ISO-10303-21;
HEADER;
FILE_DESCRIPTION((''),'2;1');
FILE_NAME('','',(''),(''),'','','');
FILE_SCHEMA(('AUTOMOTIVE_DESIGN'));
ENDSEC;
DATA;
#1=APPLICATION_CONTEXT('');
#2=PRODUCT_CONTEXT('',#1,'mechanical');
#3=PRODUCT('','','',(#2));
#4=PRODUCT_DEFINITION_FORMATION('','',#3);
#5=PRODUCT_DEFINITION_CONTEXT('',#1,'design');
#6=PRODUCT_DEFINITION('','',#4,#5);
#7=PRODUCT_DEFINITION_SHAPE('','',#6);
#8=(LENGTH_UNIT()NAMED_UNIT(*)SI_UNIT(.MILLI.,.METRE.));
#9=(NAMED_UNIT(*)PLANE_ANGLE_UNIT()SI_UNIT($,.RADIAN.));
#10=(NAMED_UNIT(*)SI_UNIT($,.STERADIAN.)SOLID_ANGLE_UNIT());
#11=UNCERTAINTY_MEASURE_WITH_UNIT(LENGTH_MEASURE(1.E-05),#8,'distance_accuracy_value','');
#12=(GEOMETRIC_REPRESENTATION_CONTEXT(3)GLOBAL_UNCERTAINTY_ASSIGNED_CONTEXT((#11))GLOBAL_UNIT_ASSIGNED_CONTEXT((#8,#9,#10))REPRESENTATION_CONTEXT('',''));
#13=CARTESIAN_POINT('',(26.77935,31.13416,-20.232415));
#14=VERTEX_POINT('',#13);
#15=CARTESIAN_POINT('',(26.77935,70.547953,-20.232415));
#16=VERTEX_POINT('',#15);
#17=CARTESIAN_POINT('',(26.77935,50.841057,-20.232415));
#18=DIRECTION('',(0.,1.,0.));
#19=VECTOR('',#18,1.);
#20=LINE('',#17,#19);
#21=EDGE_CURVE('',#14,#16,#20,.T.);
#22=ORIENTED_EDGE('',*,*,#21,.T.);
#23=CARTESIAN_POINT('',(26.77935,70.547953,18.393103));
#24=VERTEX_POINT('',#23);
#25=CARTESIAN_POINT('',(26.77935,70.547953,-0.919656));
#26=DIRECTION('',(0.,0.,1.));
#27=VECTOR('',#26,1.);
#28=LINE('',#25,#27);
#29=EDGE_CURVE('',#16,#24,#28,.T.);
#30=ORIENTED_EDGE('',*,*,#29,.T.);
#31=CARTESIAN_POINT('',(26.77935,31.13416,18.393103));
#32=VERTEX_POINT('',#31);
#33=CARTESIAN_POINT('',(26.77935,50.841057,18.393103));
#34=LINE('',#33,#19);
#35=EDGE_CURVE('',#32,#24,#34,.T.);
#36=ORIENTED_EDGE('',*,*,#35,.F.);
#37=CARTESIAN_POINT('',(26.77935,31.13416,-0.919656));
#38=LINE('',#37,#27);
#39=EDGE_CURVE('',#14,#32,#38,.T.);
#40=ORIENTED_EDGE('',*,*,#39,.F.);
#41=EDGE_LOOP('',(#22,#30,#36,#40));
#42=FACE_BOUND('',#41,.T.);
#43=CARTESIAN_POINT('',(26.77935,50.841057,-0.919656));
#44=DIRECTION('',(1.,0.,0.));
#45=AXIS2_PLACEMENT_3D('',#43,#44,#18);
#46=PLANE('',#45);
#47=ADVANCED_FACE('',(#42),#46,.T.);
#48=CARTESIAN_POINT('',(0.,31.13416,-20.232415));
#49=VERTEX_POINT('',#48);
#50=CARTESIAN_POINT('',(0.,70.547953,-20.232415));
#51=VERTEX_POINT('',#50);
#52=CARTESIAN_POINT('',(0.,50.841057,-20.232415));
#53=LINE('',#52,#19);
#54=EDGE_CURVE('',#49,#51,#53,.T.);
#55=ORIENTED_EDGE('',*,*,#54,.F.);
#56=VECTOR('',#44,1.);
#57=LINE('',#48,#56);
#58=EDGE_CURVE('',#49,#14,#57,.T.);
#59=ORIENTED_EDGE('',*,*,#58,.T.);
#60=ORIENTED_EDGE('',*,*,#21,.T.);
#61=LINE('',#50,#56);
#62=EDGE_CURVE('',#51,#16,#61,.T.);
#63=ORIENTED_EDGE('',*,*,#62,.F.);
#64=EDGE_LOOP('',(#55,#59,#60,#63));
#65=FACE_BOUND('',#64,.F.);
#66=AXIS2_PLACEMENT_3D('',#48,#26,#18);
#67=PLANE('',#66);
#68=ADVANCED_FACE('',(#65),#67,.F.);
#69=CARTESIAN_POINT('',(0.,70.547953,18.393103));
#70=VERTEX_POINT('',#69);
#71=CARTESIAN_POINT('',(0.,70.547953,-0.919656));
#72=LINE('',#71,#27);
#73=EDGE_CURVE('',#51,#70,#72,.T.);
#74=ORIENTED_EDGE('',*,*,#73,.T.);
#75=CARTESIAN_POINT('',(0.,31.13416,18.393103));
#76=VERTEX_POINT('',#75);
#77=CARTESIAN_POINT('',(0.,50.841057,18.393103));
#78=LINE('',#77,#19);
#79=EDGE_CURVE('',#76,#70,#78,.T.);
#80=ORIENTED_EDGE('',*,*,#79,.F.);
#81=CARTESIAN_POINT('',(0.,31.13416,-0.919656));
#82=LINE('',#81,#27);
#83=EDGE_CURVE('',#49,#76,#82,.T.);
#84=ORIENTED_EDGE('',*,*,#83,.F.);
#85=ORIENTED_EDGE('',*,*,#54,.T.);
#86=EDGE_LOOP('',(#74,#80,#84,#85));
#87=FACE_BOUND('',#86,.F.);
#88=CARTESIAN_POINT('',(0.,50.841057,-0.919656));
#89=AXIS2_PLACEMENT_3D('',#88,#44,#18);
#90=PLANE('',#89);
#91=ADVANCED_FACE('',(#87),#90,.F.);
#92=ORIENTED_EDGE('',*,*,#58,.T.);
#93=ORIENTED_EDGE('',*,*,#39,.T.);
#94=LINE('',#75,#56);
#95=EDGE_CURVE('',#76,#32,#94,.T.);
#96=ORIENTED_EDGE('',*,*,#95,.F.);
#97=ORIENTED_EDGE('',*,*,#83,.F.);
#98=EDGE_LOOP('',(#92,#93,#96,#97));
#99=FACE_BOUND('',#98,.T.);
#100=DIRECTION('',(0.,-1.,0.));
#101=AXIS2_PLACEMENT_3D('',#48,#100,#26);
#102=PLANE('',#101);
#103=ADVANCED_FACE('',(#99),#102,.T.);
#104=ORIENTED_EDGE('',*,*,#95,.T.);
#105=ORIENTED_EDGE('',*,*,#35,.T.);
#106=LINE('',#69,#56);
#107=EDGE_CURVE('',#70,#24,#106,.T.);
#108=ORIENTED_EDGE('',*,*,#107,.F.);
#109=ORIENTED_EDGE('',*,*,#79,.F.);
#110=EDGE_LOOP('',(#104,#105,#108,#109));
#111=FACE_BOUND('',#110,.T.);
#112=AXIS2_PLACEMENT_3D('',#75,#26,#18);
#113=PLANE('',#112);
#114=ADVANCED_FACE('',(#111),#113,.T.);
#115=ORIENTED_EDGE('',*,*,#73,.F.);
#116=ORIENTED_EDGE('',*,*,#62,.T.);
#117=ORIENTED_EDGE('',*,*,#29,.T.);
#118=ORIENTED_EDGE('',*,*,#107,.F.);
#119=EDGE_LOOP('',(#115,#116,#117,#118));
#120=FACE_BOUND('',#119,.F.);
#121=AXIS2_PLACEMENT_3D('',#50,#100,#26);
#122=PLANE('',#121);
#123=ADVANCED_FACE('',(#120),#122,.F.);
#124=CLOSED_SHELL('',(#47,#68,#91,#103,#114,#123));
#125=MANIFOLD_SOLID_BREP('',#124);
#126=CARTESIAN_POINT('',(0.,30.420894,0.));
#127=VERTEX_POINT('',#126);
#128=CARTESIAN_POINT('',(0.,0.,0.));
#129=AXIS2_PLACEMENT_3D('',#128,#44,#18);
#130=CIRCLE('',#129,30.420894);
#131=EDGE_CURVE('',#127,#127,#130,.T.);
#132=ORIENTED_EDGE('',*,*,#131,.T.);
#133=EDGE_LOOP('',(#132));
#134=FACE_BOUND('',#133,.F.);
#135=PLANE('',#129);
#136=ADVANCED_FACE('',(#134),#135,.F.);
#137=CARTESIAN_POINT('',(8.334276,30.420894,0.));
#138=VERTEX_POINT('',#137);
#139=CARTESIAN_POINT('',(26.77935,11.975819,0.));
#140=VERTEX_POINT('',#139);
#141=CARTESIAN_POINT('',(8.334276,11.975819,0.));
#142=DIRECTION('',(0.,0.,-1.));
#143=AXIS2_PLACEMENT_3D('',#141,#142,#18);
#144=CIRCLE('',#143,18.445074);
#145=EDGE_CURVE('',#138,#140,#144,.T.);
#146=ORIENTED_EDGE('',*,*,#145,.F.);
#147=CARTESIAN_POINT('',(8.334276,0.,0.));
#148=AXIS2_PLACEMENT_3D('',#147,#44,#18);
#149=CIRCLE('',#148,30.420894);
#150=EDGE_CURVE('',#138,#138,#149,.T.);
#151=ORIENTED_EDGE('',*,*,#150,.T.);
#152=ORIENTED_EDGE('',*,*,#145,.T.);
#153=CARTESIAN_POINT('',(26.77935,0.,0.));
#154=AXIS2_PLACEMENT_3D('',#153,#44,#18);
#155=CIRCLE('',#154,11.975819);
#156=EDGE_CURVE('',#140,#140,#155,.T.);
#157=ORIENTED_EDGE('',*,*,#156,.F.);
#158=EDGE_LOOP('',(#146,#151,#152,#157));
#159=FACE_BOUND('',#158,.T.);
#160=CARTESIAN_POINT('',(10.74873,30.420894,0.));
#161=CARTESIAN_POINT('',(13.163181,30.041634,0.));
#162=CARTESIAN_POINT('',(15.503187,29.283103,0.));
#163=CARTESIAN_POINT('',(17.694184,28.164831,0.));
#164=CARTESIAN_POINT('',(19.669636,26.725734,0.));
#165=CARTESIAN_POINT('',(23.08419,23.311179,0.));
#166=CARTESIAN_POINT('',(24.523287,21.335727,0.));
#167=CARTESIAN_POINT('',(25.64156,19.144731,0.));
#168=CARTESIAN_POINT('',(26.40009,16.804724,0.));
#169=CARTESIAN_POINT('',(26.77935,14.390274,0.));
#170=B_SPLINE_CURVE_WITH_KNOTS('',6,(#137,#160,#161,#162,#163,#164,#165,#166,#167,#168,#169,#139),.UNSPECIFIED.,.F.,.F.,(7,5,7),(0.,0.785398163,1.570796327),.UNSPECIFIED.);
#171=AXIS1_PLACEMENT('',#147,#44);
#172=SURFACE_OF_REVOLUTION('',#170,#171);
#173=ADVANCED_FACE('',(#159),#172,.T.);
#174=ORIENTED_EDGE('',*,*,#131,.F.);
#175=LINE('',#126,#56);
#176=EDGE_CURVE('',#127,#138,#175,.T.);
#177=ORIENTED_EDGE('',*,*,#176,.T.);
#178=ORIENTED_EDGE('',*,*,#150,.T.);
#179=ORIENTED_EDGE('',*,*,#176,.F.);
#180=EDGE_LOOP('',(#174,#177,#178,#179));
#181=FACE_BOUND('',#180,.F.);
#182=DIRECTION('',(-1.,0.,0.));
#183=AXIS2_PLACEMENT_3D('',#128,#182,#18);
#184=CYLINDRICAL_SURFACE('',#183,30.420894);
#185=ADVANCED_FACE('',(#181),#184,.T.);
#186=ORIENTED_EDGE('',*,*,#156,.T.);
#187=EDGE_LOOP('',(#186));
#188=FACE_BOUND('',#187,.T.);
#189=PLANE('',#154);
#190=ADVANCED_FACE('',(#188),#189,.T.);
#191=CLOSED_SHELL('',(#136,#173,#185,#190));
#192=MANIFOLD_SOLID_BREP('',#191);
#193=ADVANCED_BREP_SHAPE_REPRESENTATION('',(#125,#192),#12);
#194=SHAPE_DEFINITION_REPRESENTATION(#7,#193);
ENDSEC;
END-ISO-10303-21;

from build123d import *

# Parameters (mm, degrees)
F0_R     = 30.4208936765
F1_DEPTH = 26.77935
F0_W     = 39.4137930125
F0_H     = 38.6255178601
F2_R     = 18.4450744592


# Not quite as in the source:
# - the program builds the solid bodies; features that only make, move or delete a surface that nothing else refers to are left out


with BuildPart() as f1:
    # F0 (on Right) → F1 (new body)
    with BuildSketch(Plane.YZ):
        Circle(F0_R)
    extrude(amount=F1_DEPTH)

    # F2
    f2_edges = [f1.edges().sort_by_distance(p)[0] for p in [
        (26.77935, -30.420894, 0),
    ]]
    fillet(f2_edges, radius=F2_R)


with BuildPart() as f1b:
    # F0 (on Right) → F1, piece 2 (new body)
    with BuildSketch(Plane.YZ):
        with Locations((50.8410567418, -0.9196558967)):
            Rectangle(F0_W, F0_H)
    extrude(amount=F1_DEPTH)


solid = Compound([f1.part, f1b.part])
